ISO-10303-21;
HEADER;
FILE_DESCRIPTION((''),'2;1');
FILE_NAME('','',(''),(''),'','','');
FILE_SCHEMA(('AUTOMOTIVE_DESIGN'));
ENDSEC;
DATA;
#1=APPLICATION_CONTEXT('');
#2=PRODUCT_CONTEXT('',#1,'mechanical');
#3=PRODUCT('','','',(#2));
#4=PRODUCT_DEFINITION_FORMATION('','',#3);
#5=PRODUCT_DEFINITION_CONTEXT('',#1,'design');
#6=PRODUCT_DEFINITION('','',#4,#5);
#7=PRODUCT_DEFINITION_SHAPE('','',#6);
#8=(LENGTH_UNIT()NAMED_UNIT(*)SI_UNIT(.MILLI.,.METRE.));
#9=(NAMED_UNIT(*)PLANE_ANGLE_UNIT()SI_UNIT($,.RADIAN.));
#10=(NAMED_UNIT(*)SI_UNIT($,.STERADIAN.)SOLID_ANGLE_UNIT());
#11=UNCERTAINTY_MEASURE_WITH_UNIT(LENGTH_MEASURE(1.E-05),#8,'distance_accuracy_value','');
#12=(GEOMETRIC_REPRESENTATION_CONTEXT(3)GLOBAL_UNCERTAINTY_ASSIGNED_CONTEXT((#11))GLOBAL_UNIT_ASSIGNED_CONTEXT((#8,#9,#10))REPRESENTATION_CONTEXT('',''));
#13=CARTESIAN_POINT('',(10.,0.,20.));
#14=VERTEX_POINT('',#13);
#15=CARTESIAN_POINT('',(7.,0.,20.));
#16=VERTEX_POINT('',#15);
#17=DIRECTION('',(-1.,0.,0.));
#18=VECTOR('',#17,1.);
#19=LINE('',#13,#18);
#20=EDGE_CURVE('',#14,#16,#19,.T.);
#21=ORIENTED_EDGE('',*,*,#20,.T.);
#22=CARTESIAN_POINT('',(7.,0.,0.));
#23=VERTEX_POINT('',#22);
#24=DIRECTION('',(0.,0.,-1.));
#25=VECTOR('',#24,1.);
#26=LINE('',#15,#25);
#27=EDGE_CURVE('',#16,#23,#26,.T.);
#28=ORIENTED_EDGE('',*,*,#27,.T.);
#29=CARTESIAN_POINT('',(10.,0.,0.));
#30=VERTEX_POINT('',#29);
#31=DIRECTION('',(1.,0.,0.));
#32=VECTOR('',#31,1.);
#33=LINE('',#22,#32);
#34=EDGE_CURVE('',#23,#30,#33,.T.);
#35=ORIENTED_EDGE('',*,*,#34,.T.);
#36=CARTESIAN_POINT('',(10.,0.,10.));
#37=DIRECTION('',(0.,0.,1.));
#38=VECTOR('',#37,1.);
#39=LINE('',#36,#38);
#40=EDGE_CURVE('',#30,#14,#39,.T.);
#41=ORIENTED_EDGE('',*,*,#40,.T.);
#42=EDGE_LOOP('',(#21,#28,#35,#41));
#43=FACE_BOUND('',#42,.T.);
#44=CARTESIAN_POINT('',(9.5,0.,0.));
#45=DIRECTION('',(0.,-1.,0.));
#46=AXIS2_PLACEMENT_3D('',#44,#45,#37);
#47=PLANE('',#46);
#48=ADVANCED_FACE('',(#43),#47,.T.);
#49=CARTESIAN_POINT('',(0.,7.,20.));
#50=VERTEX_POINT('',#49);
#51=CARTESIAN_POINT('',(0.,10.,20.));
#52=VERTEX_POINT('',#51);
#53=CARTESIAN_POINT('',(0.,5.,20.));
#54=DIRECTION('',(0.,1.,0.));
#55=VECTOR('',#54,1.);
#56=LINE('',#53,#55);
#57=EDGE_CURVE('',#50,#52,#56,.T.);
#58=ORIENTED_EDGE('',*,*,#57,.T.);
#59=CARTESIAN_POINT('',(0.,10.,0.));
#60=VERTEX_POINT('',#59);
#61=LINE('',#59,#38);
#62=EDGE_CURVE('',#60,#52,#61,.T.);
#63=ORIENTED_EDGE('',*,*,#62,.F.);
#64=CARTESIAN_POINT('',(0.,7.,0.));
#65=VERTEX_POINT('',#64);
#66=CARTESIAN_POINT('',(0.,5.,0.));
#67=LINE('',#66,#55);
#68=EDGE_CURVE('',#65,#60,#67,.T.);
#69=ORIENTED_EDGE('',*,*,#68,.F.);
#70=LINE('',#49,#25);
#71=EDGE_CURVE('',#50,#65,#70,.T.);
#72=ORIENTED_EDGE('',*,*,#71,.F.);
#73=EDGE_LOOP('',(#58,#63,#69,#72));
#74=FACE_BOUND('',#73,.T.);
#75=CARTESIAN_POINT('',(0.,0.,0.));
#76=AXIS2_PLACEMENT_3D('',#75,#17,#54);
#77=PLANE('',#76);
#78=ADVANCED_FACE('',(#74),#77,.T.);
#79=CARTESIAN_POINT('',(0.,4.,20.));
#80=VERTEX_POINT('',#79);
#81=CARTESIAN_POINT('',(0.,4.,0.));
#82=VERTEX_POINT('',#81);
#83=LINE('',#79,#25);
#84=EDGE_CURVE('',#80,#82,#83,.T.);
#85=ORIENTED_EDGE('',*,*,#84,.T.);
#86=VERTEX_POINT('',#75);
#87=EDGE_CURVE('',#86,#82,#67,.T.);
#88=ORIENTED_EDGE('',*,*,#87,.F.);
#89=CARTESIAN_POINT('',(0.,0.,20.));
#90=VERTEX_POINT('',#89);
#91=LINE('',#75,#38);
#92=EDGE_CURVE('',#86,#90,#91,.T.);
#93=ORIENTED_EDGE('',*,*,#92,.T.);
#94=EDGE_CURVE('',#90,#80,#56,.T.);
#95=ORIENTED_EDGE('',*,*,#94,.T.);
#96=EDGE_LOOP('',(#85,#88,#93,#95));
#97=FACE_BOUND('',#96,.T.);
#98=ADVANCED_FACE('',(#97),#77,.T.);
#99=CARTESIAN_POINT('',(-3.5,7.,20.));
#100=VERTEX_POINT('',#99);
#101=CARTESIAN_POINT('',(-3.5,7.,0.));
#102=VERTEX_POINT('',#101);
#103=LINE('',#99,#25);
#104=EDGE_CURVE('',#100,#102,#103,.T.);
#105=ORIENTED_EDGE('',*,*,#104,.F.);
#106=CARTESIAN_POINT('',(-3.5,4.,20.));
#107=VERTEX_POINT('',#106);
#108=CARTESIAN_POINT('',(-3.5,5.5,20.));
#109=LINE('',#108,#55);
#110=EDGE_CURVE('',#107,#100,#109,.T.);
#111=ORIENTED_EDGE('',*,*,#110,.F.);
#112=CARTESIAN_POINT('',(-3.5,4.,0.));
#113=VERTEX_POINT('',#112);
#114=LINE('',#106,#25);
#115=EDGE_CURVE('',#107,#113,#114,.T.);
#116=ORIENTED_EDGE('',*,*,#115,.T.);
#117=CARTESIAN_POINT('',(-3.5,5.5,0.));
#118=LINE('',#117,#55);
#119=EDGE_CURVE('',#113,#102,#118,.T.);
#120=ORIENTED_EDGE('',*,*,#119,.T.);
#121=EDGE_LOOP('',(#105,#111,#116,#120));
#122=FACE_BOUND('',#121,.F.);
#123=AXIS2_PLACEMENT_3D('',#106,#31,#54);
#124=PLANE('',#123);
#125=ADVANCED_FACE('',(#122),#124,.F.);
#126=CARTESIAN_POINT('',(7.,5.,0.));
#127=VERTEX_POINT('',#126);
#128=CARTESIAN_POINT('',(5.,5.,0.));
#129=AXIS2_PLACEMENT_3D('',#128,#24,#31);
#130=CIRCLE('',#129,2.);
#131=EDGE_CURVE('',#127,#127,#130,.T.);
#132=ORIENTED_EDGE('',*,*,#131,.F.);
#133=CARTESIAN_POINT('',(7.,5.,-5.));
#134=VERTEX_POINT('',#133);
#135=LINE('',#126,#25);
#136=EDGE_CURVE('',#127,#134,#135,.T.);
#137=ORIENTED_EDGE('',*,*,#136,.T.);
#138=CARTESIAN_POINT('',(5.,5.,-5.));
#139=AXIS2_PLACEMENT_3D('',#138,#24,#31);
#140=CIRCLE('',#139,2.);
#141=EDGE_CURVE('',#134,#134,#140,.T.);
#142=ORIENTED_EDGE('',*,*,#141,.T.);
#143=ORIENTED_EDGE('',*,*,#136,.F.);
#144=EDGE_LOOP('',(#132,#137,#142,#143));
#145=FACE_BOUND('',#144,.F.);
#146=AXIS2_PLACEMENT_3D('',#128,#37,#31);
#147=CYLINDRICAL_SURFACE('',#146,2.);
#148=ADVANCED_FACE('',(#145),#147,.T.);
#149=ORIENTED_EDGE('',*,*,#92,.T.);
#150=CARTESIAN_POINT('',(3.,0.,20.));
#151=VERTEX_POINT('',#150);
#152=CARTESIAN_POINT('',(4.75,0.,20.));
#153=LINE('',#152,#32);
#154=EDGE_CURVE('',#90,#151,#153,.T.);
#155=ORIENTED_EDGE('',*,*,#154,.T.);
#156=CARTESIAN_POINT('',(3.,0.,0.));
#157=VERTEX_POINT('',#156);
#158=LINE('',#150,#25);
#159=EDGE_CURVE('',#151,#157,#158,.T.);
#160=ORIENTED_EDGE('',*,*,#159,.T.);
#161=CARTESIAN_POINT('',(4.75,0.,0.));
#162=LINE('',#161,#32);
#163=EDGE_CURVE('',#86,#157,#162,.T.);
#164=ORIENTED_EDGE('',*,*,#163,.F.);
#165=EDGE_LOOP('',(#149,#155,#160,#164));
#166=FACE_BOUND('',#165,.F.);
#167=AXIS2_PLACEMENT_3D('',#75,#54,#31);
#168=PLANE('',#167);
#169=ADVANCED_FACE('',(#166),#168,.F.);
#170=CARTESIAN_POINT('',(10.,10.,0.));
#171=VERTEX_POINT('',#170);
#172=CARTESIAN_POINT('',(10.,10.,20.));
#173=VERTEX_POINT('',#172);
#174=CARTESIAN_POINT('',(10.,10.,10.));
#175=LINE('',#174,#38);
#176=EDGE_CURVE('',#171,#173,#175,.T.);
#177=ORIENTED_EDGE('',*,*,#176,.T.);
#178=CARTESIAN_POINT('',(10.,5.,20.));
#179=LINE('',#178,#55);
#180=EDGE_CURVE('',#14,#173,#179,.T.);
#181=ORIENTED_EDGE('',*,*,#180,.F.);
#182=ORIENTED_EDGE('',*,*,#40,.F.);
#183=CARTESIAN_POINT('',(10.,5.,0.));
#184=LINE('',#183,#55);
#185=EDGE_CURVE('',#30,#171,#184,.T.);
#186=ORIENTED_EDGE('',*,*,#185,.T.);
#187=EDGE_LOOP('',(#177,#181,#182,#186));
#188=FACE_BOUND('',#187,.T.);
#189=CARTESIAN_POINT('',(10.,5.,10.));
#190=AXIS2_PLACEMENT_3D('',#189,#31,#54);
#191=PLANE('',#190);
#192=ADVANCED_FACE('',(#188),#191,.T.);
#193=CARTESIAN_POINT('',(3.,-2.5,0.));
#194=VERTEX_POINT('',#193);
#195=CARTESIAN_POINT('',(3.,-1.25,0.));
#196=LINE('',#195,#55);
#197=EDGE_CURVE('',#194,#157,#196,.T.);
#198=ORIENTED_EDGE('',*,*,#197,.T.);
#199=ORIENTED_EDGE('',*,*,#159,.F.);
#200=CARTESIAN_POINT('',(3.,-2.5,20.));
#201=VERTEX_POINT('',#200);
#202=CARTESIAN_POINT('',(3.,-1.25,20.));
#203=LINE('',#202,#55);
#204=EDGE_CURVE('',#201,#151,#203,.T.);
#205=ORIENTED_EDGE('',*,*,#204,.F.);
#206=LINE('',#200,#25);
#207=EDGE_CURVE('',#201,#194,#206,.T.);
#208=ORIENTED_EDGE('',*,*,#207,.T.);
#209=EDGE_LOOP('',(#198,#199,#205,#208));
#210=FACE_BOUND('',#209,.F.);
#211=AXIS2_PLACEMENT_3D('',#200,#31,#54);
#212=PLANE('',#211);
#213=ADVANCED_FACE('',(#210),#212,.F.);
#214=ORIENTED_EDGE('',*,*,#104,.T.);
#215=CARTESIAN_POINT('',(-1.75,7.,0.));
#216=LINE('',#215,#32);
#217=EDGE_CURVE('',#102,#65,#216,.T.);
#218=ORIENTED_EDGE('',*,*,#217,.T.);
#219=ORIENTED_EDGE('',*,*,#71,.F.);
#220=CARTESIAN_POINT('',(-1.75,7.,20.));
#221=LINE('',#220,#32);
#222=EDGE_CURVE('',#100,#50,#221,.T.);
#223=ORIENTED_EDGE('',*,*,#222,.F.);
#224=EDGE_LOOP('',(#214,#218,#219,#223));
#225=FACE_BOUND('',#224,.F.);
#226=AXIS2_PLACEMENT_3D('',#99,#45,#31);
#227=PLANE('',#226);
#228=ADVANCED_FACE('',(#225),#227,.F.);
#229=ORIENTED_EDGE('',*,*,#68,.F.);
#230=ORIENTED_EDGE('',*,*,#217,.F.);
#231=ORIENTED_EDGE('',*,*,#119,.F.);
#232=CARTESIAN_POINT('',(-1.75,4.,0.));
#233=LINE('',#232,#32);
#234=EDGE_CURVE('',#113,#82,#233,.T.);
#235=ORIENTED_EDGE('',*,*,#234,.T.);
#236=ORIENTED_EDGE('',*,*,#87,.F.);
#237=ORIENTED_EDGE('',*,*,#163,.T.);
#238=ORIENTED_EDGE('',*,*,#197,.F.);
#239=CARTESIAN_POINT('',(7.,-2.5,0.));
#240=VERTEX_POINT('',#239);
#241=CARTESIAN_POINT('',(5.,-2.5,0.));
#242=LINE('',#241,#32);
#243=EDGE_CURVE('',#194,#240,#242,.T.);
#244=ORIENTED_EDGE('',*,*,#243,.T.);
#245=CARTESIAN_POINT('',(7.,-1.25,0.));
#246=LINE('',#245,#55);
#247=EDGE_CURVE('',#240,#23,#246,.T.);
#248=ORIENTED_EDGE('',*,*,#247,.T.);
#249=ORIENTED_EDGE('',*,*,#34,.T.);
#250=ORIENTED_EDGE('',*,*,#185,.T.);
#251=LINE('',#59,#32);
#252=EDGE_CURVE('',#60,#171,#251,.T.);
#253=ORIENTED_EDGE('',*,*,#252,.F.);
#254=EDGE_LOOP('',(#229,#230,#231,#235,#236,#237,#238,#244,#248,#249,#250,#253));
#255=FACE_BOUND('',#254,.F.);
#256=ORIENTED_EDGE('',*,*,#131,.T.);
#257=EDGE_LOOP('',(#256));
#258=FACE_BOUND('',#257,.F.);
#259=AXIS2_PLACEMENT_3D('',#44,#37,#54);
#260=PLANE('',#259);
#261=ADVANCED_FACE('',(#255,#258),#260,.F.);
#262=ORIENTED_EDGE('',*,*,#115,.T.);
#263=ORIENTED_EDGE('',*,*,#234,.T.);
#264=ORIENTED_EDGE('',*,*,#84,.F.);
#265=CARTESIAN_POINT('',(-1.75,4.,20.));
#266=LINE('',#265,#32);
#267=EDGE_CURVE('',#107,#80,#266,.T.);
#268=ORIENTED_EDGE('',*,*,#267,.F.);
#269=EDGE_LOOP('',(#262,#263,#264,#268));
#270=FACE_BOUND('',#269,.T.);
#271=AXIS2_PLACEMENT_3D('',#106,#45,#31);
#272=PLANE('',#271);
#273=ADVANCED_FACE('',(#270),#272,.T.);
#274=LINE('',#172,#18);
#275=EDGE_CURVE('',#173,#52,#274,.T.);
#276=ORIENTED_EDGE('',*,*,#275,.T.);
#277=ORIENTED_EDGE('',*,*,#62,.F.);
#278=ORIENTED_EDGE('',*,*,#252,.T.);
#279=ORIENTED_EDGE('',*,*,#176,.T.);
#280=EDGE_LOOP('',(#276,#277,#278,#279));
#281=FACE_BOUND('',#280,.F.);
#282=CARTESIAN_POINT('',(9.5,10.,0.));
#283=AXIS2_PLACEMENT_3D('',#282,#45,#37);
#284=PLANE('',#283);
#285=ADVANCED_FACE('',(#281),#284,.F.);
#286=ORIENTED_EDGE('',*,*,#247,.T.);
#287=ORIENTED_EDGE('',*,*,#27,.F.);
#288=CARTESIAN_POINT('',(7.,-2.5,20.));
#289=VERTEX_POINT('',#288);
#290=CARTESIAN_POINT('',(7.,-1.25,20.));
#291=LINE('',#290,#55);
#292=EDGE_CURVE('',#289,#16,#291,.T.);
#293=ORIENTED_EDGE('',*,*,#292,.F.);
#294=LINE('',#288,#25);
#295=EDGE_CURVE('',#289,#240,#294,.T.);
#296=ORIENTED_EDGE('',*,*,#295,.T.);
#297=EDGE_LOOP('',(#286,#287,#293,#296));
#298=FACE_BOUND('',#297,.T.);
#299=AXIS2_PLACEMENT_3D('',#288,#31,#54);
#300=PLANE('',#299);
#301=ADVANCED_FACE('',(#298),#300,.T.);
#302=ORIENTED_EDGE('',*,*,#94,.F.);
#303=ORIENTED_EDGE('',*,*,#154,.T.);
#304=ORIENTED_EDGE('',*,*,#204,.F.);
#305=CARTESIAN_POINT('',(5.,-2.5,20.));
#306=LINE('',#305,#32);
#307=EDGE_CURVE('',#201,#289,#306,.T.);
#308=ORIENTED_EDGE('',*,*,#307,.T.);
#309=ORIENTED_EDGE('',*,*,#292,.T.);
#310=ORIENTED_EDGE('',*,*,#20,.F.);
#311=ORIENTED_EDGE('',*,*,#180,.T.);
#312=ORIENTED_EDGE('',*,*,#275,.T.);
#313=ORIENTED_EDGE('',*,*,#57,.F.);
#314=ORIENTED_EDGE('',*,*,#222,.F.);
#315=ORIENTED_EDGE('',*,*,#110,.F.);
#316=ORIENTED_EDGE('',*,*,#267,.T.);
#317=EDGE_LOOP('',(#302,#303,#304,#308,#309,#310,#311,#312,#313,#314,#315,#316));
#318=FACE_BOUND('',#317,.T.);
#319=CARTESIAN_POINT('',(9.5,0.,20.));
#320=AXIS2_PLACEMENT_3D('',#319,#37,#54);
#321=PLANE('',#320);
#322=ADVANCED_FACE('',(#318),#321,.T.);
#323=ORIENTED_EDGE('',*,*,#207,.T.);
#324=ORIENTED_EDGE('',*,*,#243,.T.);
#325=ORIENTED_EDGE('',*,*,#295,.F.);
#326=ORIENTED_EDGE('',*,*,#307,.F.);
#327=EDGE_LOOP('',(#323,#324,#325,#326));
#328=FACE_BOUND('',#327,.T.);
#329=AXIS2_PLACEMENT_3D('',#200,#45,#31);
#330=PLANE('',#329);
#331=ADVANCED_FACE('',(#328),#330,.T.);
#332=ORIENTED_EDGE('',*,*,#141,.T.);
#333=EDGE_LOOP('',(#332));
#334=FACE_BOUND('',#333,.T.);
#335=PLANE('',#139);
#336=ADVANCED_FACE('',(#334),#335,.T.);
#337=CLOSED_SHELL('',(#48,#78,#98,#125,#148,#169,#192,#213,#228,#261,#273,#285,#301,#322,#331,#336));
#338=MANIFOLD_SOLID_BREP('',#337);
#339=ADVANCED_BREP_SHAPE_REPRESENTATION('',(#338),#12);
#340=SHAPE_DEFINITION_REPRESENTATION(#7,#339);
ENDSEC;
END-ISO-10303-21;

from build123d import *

# Parameters (mm, degrees)
F0_W     = 9.5
F0_H     = 10
F1_DEPTH = 20
F2_W     = 3.5
F2_H     = 3
F3_DEPTH = 20
F2_W_2   = 4
F2_H_2   = 2.5
F5_DEPTH = 20
F6_R     = 2
F7_DEPTH = 5
F8_W     = 10
F8_H     = 20
F9_DEPTH = 0.5


# Not quite as in the source:
# - a feature names something its author has since deleted; it is built from what else it names


with BuildPart() as f1:
    # F0 (on Top) → F1 (new body)
    with BuildSketch(Plane.XY):
        with Locations((4.75, 5)):
            Rectangle(F0_W, F0_H)
    extrude(amount=F1_DEPTH)

    # F2 (on face) → F3 (join, through all)
    with BuildSketch(Plane.XY.offset(20)):
        with Locations((-1.75, 5.5)):
            Rectangle(F2_W, F2_H)
    extrude(amount=-F3_DEPTH)

    # F2 (on face) → F5 (join, through all)
    with BuildSketch(Plane.XY.offset(20)):
        with Locations((5, -1.25)):
            Rectangle(F2_W_2, F2_H_2)
    extrude(amount=-F5_DEPTH)

    # F6 (on face) → F7 (join)
    with BuildSketch(Plane(origin=(0, 0, 0), x_dir=(1, 0, 0), z_dir=(0, 0, -1))):
        with Locations((5, -5)):
            Circle(F6_R)
    extrude(amount=F7_DEPTH)

    # F8 (on face) → F9 (join)
    with BuildSketch(Plane.YZ.offset(9.5)):
        with Locations((5, 10)):
            Rectangle(F8_W, F8_H)
    extrude(amount=F9_DEPTH)


solid = f1.part
